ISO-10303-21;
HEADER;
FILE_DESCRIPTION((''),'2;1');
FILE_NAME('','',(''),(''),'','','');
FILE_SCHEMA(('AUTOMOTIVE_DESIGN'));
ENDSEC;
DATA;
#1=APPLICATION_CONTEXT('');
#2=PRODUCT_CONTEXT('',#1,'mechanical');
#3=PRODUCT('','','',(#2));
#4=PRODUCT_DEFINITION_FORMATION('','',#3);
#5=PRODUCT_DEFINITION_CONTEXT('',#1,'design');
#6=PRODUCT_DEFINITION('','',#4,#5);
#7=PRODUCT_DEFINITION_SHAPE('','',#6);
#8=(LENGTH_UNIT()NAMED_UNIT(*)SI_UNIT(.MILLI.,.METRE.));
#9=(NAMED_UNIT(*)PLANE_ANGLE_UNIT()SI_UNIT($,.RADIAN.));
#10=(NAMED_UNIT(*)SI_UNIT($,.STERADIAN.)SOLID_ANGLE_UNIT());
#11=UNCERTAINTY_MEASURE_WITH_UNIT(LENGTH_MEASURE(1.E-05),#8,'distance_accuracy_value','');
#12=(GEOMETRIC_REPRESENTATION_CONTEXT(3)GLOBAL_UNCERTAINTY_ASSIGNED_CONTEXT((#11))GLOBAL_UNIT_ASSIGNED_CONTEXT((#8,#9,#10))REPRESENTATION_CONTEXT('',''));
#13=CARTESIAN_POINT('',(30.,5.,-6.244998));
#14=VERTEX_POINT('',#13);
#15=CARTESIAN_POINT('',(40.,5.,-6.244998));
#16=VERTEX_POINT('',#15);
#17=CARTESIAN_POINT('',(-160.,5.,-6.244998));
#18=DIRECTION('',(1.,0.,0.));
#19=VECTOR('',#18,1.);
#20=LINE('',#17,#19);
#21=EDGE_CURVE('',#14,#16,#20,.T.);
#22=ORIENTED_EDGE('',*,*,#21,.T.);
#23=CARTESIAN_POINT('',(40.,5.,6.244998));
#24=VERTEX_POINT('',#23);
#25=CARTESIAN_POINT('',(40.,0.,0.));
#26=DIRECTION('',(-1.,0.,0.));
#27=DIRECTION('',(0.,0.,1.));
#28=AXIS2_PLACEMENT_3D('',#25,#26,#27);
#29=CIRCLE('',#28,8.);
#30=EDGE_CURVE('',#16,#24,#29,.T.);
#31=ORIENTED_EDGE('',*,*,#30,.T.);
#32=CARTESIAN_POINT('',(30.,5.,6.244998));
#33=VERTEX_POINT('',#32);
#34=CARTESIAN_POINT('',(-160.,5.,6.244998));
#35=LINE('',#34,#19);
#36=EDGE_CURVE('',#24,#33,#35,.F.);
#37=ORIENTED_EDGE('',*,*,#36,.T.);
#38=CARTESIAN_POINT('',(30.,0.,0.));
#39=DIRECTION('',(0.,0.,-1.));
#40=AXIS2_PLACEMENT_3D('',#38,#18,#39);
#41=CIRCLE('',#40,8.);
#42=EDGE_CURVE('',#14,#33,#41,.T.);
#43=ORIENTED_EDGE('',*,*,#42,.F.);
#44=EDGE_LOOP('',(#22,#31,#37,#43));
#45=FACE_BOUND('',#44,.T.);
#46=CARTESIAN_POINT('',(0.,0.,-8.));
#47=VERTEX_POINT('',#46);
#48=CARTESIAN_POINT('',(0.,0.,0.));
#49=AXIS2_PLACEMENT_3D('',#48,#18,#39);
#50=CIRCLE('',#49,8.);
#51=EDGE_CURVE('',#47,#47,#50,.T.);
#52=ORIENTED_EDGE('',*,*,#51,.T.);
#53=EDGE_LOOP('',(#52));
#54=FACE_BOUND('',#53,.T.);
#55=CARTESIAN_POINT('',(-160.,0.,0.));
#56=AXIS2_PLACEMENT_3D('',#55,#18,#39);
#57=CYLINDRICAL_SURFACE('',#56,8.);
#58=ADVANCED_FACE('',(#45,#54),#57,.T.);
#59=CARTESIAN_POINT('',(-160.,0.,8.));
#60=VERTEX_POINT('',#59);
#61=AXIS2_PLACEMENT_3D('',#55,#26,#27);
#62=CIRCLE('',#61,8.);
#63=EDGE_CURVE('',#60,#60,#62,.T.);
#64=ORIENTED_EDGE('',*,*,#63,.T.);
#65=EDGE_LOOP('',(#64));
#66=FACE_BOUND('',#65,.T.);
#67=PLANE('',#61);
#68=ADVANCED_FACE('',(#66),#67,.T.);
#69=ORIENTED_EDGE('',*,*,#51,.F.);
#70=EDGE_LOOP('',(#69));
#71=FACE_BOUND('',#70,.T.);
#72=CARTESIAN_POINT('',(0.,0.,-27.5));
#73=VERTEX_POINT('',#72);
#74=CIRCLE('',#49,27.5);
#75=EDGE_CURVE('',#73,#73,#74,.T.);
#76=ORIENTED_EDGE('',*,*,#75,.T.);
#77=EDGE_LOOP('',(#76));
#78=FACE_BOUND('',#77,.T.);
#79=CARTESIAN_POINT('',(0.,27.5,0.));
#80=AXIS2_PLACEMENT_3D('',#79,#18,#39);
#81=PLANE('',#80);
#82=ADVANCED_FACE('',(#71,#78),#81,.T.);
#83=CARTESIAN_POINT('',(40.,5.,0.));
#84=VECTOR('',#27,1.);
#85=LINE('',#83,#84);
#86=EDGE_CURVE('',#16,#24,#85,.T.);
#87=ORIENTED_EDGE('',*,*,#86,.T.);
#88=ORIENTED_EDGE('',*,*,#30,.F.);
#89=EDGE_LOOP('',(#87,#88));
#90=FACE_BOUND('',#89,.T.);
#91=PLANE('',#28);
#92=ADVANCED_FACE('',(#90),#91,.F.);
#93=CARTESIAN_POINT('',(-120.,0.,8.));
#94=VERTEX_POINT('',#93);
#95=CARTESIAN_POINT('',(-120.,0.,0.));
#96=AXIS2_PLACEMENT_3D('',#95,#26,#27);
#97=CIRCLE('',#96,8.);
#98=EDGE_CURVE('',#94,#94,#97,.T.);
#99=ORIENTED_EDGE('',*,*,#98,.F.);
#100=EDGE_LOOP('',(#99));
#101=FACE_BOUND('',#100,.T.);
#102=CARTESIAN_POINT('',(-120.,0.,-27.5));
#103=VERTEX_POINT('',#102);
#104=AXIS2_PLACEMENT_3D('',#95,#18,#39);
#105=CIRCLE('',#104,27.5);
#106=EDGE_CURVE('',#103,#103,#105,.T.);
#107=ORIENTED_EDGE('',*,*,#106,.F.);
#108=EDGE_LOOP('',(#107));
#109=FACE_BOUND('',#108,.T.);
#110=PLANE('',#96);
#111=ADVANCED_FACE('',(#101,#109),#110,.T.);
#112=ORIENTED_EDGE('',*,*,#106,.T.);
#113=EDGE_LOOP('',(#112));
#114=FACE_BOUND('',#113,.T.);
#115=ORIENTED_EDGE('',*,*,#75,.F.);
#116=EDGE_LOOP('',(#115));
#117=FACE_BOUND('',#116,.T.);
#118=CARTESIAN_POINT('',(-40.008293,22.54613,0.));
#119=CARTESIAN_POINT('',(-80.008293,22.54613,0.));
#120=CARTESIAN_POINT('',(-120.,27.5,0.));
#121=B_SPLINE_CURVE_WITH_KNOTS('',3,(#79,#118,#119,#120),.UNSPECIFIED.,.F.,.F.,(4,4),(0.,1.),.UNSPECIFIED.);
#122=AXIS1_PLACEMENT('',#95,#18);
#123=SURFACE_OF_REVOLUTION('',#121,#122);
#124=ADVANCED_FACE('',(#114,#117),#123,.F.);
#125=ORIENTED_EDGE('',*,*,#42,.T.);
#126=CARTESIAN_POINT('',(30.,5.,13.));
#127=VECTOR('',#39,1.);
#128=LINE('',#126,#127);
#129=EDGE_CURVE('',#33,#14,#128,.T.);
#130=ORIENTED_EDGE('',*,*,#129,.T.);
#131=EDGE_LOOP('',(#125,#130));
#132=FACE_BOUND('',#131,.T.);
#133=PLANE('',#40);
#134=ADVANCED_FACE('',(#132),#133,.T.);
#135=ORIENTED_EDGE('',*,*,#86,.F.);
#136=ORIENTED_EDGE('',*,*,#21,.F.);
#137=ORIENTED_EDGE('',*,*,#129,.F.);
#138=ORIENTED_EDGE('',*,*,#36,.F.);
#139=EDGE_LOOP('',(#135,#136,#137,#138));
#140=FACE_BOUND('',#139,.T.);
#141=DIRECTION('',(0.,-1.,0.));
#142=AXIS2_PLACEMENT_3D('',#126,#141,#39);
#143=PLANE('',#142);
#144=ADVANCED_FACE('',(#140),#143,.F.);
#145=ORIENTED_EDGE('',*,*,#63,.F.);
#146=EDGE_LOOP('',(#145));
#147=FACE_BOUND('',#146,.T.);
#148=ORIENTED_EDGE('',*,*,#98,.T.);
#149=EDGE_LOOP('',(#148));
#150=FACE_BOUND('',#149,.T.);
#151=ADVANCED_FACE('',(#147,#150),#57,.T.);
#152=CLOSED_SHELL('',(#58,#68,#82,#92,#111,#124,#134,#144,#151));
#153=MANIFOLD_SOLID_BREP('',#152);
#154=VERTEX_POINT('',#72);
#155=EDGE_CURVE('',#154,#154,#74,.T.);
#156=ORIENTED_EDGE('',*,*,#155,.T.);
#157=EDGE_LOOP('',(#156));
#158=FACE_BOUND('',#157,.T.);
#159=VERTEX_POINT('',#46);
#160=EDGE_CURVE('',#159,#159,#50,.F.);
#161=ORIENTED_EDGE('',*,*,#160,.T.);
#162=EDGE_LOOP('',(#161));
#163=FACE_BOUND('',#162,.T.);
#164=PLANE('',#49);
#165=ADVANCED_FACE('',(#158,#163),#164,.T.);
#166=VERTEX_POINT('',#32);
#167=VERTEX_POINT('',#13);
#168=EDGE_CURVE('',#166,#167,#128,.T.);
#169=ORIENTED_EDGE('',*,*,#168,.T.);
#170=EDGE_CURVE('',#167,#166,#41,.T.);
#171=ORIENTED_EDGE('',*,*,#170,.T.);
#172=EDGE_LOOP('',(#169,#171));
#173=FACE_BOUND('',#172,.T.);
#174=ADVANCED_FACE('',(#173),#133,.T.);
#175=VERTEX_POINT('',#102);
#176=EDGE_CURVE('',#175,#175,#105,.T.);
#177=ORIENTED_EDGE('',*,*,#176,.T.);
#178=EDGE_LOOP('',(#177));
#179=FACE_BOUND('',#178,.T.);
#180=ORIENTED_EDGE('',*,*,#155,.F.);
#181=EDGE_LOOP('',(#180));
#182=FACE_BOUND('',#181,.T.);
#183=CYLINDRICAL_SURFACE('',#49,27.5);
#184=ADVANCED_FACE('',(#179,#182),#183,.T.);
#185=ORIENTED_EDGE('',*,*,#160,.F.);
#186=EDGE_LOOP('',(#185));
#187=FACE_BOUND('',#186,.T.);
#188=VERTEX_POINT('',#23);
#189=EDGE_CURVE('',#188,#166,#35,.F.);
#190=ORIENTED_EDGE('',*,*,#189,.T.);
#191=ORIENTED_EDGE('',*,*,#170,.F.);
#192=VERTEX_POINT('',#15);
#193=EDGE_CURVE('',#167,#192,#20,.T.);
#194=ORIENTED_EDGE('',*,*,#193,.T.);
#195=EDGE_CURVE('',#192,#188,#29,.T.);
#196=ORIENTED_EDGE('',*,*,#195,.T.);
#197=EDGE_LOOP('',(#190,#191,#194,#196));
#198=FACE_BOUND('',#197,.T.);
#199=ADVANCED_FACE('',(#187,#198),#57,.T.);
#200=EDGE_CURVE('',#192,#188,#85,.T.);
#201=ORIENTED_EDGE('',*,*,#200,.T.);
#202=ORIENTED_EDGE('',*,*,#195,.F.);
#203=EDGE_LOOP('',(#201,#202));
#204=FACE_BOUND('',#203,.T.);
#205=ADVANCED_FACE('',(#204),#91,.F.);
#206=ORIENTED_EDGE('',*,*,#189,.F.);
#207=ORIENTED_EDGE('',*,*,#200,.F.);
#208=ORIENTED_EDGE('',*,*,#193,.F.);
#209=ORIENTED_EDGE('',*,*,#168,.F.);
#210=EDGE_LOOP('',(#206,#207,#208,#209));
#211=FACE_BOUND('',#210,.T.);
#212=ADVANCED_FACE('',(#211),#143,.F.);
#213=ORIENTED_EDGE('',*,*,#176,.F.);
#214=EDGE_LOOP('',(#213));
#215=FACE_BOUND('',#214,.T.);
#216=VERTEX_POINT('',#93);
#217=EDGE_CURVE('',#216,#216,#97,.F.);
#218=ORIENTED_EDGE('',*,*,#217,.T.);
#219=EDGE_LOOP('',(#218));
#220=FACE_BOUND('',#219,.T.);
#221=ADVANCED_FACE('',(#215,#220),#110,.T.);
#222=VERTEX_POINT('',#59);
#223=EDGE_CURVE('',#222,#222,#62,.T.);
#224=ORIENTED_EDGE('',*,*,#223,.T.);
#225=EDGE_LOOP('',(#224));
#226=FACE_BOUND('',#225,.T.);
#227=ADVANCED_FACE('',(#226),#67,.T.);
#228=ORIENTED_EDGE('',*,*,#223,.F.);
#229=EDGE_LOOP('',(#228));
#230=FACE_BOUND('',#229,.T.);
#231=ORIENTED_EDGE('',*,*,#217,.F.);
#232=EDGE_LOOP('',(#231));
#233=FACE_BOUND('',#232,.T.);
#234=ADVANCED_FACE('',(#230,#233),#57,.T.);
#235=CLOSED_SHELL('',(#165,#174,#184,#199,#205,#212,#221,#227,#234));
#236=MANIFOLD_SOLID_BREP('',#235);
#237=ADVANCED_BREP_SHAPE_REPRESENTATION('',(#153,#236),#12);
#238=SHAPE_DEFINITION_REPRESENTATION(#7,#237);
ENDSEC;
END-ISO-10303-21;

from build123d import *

# Parameters (mm, degrees)
SKETCH2_W                 = 120
SKETCH2_H                 = 27.5
SKETCH4_R                 = 8
BOSS_EXTRUDE1_DEPTH       = 100
SKETCH5_W                 = 26
SKETCH5_H                 = 5
CUT_EXTRUDE1_DEPTH        = 10
BODY_MOVE_COPY1_START     = -160
BODY_MOVE_COPY1_OUTLINE_R = 8
BODY_MOVE_COPY1_DEPTH     = 190
BODY_MOVE_COPY1_START_2   = 30
BODY_MOVE_COPY1_2_DEPTH   = 10


# Read off the part's stored shape, not the designer's step: Body-Move/Copy1
with BuildPart() as part:
    # Sketch1 → Revolve1 (revolve)
    with BuildSketch(Plane.XY):
        with BuildLine():
            Line((0, 0), (-120, 0))
            Line((-120, 0), (-120, 27.5))
            add(Edge.make_bspline(
                [(-120, 27.5), (-80.008293057, 22.546130336), (-40.008293057, 22.546130336), (0, 27.5)],
                knots=[0, 0, 0, 0, 1, 1, 1, 1], degree=3))
            Line((0, 27.5), (0, 0))
        make_face()
    revolve(axis=Axis((-120, 0, 0), (-1, 0, 0)))


with BuildPart() as body_2:
    # Sketch2 → Revolve2 (revolve)
    with BuildSketch(Plane.XY, mode=Mode.PRIVATE) as revolve2_sk:
        with Locations((-60, 13.75)):
            Rectangle(SKETCH2_W, SKETCH2_H)
    revolve(revolve2_sk.sketch.rotate(Axis((0, 0, 0), (-1, 0, 0)), 90), axis=Axis((0, 0, 0), (-1, 0, 0)))


with BuildPart() as body_3:
    # Sketch4 → Boss-Extrude1 (new, symmetric)
    with BuildSketch(Plane.ZY.offset(60)):
        Circle(SKETCH4_R)
    extrude(amount=BOSS_EXTRUDE1_DEPTH, both=True)

    # Sketch5 → Cut-Extrude1 (cut)
    with BuildSketch(Plane(origin=(40, 0, 0), x_dir=(0, 0, -1), z_dir=(1, 0, 0))):
        with Locations((0, 7.5)):
            Rectangle(SKETCH5_W, SKETCH5_H)
    extrude(amount=-CUT_EXTRUDE1_DEPTH, mode=Mode.SUBTRACT)

    # Combine1: union part
    add(part.part)


with BuildPart() as body_4:
    # Body-Move/Copy1 outline → Body-Move/Copy1 (new body)
    with BuildSketch(Plane.YZ.offset(BODY_MOVE_COPY1_START)):
        Circle(BODY_MOVE_COPY1_OUTLINE_R)
    extrude(amount=BODY_MOVE_COPY1_DEPTH)

    # Body-Move_Copy1 2 outline → Body-Move_Copy1 2 (add)
    with BuildSketch(Plane.YZ.offset(BODY_MOVE_COPY1_START_2)):
        with BuildLine():
            Line((5, -6.244997998), (5, 6.244997998))
            ThreePointArc((5, 6.244997998), (-8, 0), (5, -6.244997998))
        make_face()
    extrude(amount=BODY_MOVE_COPY1_2_DEPTH)


with BuildPart() as body_2_1:
    add(body_2.part)

    # Combine2: union body 4
    add(body_4.part)


solid = Compound([body_3.part, body_2_1.part])
